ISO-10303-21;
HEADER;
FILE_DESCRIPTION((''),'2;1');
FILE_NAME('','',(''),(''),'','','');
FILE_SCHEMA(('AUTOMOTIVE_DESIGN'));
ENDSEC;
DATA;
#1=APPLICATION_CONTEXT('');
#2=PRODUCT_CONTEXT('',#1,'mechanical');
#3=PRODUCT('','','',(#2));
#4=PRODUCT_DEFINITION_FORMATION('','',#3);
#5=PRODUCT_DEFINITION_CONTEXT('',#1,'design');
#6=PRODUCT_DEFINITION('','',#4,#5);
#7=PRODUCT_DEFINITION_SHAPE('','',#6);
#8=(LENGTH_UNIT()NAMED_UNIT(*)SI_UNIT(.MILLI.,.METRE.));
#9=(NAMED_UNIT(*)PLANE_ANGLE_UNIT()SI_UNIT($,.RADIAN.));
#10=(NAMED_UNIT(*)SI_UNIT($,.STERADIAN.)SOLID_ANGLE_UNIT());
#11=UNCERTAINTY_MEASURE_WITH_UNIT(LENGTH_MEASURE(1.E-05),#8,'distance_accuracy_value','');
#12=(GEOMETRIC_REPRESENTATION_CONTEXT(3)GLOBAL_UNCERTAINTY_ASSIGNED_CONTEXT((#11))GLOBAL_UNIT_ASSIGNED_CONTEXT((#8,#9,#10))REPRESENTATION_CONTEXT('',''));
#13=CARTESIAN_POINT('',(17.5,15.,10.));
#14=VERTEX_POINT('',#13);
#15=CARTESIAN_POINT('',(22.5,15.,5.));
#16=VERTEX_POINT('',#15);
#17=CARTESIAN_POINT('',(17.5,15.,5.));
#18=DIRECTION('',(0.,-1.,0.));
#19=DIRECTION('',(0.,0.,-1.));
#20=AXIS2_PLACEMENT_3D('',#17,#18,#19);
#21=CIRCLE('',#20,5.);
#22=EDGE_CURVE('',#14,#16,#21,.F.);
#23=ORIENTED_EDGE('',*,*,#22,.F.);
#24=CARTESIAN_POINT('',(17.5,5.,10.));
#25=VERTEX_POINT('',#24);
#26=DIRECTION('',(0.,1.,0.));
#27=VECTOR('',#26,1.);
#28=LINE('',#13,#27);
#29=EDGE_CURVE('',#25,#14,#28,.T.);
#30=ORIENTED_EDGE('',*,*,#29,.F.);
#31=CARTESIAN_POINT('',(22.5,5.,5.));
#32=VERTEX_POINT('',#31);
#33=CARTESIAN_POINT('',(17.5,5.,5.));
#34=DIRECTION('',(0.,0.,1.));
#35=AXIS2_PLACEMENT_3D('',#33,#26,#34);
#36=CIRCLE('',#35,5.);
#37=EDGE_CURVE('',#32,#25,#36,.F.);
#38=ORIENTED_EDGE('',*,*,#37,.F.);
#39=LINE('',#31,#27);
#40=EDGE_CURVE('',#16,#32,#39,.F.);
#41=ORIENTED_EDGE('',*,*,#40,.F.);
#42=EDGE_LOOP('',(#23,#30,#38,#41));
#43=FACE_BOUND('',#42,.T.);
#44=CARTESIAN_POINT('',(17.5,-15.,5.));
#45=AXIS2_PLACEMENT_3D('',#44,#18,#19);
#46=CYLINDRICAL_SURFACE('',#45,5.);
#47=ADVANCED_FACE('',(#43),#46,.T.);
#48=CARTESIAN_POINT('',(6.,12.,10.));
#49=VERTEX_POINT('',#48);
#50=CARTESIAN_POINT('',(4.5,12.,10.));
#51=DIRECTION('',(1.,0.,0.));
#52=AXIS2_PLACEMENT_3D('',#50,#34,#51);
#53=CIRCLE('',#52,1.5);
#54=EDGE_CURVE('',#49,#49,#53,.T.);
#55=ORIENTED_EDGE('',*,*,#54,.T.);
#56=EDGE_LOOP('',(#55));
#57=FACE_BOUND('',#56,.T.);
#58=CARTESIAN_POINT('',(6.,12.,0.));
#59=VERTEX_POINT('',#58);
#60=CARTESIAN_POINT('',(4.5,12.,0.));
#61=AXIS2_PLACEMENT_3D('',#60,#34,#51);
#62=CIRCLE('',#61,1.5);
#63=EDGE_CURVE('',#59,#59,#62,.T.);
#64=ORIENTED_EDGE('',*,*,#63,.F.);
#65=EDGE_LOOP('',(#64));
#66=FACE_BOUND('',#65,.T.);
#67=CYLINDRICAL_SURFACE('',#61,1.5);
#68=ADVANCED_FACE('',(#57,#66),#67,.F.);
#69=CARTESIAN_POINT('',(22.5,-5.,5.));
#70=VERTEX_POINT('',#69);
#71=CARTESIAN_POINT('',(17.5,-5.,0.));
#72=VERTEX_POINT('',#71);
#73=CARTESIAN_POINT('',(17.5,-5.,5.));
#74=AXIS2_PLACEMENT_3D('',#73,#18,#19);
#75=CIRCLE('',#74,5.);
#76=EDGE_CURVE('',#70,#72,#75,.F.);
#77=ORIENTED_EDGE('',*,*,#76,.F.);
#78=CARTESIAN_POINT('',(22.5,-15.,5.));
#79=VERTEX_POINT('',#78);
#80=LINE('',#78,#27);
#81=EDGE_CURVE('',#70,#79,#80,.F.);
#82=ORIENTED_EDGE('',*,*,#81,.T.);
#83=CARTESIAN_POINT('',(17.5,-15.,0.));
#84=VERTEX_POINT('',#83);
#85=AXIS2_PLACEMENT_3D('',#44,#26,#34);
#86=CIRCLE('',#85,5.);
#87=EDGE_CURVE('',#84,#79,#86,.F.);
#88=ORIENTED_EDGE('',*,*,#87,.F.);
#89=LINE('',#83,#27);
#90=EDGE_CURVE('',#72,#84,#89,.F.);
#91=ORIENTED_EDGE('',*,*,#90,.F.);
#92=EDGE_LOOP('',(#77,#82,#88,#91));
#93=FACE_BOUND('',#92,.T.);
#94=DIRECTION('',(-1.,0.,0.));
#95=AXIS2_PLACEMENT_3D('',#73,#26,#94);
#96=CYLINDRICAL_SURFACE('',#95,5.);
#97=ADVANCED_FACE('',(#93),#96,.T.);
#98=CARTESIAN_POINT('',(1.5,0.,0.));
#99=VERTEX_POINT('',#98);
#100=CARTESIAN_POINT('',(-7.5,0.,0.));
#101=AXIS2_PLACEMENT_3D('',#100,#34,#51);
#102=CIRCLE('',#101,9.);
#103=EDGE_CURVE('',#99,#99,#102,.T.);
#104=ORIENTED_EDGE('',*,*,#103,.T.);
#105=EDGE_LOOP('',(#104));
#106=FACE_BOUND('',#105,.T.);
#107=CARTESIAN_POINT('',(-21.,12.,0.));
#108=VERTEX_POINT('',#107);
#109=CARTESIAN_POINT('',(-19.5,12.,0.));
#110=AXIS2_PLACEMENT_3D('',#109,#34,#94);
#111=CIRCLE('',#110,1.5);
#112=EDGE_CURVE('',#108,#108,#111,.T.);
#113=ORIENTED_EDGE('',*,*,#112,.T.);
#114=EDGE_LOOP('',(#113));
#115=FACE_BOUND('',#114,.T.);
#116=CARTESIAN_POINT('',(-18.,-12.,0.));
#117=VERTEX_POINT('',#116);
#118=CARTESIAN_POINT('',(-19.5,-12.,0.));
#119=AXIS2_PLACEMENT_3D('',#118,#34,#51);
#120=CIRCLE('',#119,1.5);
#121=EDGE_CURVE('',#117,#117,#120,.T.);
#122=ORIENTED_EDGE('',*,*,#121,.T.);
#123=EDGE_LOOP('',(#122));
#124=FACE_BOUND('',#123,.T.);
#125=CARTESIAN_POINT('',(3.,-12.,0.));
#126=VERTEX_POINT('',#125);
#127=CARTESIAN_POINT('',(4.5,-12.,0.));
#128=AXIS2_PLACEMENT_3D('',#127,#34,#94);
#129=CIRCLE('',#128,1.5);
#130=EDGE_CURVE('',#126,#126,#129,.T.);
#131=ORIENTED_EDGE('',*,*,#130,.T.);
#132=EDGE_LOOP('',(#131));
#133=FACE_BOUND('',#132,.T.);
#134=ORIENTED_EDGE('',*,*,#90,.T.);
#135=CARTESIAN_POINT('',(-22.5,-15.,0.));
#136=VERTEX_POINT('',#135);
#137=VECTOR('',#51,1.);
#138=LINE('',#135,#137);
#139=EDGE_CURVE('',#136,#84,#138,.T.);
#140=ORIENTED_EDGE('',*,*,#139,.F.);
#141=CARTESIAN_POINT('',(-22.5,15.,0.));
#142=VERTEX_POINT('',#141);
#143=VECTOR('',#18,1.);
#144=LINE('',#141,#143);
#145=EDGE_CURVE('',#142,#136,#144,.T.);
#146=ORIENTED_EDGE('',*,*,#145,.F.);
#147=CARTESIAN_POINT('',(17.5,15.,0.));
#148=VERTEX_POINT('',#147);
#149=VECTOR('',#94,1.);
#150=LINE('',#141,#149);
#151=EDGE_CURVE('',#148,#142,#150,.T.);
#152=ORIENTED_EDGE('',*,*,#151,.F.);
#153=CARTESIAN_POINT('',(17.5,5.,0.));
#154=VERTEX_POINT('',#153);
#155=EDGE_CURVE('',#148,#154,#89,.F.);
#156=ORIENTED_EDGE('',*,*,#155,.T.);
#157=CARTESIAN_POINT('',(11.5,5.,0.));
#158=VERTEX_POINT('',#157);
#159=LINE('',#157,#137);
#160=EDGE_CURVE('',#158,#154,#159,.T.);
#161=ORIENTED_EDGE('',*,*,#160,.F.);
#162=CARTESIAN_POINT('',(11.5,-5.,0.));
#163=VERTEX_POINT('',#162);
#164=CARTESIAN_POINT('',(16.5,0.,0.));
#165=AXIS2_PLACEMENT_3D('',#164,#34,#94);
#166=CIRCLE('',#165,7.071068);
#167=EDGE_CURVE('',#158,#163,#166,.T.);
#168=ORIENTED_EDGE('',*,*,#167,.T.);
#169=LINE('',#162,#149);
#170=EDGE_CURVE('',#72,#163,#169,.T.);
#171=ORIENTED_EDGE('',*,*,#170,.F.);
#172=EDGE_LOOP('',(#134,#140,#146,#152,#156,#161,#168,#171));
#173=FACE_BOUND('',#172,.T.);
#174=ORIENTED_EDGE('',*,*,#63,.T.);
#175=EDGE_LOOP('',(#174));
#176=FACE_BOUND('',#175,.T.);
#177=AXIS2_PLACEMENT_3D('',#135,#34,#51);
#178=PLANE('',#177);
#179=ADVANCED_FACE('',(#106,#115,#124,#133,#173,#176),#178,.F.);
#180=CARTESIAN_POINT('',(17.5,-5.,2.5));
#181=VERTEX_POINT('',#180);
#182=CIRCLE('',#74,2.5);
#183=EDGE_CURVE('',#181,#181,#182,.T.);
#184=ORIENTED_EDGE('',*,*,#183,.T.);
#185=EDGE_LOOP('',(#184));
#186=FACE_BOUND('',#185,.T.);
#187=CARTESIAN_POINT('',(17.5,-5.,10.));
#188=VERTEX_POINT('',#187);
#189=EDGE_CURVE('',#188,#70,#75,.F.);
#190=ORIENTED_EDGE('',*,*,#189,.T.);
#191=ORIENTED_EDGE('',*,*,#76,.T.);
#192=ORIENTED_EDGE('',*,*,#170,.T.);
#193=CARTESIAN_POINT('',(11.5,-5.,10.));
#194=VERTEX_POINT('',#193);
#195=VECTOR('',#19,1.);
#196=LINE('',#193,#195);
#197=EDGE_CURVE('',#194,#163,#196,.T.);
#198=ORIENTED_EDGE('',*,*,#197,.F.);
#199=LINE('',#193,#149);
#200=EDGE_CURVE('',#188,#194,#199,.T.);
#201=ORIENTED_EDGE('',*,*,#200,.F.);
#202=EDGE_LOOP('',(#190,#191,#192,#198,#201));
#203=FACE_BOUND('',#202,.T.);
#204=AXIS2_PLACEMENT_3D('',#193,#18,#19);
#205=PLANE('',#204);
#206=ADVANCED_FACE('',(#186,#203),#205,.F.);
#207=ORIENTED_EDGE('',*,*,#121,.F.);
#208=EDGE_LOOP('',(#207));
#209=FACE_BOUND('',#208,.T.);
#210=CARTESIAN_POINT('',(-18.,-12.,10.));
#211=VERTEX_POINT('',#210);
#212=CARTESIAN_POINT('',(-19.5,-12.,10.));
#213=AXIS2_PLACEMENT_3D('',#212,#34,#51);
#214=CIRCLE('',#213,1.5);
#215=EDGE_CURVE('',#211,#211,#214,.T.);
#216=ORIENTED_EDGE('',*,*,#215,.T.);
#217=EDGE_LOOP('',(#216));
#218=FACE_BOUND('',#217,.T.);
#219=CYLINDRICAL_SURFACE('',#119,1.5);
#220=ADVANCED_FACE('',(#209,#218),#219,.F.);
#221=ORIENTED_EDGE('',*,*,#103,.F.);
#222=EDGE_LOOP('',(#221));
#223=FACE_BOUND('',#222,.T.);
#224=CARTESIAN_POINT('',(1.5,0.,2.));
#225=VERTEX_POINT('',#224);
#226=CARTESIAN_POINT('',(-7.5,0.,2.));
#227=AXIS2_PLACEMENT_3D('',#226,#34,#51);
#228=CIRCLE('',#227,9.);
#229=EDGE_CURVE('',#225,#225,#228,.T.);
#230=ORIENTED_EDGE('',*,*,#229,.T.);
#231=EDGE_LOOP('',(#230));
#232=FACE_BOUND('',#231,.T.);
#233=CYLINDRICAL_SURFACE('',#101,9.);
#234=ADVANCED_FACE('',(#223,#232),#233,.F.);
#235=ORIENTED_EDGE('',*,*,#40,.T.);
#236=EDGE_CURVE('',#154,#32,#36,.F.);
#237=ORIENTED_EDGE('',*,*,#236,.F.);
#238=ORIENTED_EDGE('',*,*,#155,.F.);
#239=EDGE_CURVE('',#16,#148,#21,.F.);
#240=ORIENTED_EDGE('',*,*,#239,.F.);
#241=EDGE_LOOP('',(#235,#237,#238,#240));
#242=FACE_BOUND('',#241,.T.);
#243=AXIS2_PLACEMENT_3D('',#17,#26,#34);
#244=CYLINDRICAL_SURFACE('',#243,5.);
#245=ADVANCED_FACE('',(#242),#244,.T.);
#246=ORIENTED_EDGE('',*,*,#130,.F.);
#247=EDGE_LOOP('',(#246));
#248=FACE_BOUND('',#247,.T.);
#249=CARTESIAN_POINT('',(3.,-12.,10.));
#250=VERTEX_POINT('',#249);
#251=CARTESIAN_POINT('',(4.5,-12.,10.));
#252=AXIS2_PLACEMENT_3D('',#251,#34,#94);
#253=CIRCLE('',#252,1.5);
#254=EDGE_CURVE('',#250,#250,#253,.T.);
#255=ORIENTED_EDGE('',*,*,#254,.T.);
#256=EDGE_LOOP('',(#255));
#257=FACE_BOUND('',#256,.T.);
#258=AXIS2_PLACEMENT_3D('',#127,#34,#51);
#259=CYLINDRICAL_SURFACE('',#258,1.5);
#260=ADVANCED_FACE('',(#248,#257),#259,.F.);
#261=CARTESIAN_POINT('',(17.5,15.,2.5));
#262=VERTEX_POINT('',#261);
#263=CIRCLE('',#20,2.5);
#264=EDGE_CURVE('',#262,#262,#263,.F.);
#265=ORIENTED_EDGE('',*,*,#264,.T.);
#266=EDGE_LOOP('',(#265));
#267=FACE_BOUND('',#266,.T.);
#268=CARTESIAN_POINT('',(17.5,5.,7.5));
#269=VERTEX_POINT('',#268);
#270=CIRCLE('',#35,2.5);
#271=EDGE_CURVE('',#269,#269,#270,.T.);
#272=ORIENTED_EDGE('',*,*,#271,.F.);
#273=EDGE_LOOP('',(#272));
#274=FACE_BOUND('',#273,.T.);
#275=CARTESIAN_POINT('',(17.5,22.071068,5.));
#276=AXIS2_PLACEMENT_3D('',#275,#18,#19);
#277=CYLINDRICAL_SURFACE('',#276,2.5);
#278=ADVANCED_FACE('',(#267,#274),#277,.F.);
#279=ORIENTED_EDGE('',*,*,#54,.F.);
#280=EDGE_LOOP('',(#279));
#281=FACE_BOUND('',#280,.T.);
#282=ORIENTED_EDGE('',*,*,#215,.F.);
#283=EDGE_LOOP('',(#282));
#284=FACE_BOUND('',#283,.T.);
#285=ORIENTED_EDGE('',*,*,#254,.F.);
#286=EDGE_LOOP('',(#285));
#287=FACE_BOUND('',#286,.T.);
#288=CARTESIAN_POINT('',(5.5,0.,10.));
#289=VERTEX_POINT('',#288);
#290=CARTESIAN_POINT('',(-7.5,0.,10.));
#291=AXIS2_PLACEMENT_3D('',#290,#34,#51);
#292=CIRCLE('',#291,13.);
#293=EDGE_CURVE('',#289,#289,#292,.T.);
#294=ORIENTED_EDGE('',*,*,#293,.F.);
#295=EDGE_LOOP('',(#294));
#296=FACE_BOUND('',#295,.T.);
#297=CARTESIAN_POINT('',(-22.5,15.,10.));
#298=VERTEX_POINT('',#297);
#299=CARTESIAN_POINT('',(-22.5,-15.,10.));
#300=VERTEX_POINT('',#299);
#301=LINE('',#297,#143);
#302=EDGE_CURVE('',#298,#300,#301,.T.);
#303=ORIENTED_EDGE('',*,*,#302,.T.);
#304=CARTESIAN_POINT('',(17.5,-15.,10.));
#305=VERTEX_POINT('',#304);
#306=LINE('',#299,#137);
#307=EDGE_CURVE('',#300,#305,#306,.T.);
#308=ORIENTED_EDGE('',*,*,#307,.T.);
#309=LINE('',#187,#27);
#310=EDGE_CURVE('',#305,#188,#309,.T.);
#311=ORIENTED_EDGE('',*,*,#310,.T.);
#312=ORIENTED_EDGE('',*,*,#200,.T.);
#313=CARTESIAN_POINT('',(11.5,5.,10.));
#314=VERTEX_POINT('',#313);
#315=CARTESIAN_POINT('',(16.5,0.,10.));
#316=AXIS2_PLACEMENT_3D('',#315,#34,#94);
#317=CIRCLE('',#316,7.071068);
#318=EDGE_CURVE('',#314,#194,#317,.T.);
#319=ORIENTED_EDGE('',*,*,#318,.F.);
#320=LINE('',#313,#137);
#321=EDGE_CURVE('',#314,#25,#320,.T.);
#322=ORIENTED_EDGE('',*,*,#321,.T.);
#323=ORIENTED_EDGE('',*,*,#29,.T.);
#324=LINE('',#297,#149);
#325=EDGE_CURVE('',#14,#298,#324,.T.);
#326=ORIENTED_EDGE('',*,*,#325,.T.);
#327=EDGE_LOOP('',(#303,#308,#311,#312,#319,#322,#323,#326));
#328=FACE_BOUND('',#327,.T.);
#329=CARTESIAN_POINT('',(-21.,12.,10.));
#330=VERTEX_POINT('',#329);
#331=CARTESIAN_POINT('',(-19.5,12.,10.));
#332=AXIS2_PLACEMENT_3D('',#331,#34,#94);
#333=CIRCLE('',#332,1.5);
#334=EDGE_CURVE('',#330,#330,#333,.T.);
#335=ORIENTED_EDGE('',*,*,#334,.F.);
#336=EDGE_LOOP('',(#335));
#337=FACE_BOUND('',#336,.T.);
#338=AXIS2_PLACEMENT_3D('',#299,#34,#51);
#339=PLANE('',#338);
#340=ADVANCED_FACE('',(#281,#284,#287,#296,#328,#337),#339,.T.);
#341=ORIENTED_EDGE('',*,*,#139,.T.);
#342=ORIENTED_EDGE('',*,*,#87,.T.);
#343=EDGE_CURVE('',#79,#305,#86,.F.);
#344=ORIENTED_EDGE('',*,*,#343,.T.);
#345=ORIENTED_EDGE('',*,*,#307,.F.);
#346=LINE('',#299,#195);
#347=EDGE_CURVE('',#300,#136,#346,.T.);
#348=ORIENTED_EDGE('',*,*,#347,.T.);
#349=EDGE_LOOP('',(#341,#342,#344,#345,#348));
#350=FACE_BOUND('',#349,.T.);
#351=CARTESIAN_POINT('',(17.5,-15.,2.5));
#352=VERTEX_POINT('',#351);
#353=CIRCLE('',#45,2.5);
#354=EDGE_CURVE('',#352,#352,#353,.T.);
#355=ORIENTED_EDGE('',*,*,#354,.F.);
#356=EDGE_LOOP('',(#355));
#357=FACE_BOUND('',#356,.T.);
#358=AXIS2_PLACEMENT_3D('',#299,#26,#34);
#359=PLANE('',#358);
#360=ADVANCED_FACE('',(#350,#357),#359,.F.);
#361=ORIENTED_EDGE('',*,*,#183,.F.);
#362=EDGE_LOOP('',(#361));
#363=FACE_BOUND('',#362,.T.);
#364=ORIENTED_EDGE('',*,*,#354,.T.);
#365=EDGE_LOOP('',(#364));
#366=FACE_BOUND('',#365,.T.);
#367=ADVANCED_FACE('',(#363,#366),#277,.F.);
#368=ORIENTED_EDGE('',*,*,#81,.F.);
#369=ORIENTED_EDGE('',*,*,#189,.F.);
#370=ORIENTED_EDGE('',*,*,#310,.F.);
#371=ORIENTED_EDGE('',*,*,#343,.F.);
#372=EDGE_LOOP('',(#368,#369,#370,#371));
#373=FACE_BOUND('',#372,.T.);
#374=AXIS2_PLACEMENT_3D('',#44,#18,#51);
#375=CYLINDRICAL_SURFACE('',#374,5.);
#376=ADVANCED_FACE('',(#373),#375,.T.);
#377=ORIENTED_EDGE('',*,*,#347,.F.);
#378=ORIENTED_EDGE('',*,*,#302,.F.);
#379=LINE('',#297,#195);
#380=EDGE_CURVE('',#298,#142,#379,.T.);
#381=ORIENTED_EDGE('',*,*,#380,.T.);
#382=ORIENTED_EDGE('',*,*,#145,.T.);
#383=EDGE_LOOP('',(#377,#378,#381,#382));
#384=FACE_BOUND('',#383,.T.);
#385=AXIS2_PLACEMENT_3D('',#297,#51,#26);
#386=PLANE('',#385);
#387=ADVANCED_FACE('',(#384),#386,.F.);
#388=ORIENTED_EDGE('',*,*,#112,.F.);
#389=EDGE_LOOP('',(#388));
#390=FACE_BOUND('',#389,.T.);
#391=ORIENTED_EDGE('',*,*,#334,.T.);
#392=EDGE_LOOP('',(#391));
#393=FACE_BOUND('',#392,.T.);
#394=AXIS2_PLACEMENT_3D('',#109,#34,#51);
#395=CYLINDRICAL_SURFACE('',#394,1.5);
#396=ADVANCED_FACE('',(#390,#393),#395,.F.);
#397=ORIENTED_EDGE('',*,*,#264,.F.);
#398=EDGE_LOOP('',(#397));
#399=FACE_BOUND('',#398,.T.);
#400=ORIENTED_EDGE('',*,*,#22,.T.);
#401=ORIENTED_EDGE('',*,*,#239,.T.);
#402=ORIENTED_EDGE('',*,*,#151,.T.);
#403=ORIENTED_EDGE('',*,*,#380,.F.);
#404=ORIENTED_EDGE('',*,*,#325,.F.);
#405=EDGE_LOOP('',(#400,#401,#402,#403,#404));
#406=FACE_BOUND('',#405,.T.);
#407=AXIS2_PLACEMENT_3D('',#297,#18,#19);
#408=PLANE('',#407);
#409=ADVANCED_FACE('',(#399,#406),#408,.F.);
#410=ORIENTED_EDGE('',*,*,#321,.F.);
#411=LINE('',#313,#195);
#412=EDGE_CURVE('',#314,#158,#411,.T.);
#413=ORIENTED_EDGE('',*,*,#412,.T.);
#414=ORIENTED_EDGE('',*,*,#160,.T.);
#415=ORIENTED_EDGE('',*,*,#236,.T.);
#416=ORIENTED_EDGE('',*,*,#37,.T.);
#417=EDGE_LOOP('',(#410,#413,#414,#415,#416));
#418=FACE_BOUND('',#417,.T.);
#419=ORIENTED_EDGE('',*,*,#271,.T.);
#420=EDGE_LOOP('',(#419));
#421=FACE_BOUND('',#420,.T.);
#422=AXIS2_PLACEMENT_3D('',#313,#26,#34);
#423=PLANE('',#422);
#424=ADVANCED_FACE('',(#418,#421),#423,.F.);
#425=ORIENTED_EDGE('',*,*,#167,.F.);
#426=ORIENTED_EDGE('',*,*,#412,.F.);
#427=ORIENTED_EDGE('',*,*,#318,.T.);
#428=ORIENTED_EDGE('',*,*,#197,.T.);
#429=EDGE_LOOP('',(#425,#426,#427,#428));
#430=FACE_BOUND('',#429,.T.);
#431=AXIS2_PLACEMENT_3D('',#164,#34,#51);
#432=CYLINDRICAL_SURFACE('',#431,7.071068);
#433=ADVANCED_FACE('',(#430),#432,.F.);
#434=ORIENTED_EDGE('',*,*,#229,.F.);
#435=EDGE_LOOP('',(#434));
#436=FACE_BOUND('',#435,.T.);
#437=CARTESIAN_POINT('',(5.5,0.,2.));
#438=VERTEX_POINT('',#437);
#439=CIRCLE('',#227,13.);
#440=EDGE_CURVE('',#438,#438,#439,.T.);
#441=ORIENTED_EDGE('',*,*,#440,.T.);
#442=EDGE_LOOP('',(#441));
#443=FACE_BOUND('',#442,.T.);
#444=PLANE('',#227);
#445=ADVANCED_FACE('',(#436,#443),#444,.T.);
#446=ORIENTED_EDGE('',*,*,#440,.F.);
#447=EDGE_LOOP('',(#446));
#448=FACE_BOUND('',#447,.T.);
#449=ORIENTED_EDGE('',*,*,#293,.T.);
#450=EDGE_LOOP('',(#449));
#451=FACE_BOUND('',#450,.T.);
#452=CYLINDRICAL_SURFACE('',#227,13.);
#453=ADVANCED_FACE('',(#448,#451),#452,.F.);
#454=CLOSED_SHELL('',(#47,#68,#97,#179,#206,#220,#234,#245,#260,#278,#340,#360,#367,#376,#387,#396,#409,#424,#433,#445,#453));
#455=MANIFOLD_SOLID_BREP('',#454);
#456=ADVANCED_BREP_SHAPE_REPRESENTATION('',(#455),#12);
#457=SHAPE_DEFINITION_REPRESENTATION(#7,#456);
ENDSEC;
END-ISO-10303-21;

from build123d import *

# Parameters (mm, degrees)
RESSALTO_EXTRUS_O1_DEPTH = 10
CORTE_EXTRUS_O1_REACH    = 40.81
ESBO_O2_R                = 2.5
CORTE_EXTRUS_O2_DEPTH    = 10
ESBO_O5_R                = 13
CORTE_EXTRUS_O3_DEPTH    = 8
ESBO_O6_R                = 9
CORTE_EXTRUS_O4_DEPTH    = 29.200177304
FILETE1_R                = 5
ESBO_O7_R                = 1.5
CORTE_EXTRUS_O5_DEPTH    = 10


with BuildPart() as part:
    # Esboço1 → Ressalto-extrusão1 (new body)
    with BuildSketch(Plane.XY):
        Polygon((-22.5, 15), (22.5, 15), (22.5, 5), (11.5, 5), (11.5, -5), (22.5, -5), (22.5, -15), (-22.5, -15), align=None)
    extrude(amount=RESSALTO_EXTRUS_O1_DEPTH)

    # Corte-extrusão1: up to this face of the body (flat: up to its plane)
    corte_extrus_o1_end = Plane(part.part.faces().sort_by_distance((0, 15, 5))[0])
    # Esboço2 → Corte-extrusão1 (cut, up to the picked face)
    with BuildSketch(Plane.XZ.offset(15), mode=Mode.PRIVATE) as corte_extrus_o1_sk1:
        with Locations(Location((17.5, 5, 0), (0, 0, 270))):
            Circle(ESBO_O2_R)
    corte_extrus_o1_tool1 = split(extrude(corte_extrus_o1_sk1.sketch, amount=-CORTE_EXTRUS_O1_REACH, mode=Mode.PRIVATE), bisect_by=corte_extrus_o1_end, keep=Keep.BOTH, mode=Mode.PRIVATE)
    add(corte_extrus_o1_tool1.solids().sort_by(Axis((17.5, -15, 5), (0, 1, 0)))[0], mode=Mode.SUBTRACT)

    # Esboço4 → Corte-extrusão2 (cut)
    with BuildSketch(Plane.XY.offset(10)):
        with BuildLine():
            Line((11.5, 5), (11.5, -5))
            ThreePointArc((11.5, -5), (9.428932188, 0), (11.5, 5))
        make_face()
    extrude(amount=-CORTE_EXTRUS_O2_DEPTH, mode=Mode.SUBTRACT)

    # Esboço5 → Corte-extrusão3 (cut)
    with BuildSketch(Plane.XY.offset(10)):
        with Locations((-7.5, 0)):
            Circle(ESBO_O5_R)
    extrude(amount=-CORTE_EXTRUS_O3_DEPTH, mode=Mode.SUBTRACT)

    # Esboço6 → Corte-extrusão4 (cut, through all)
    with BuildSketch(Plane.XY.offset(2)):
        with Locations((-7.5, 0)):
            Circle(ESBO_O6_R)
    extrude(amount=-CORTE_EXTRUS_O4_DEPTH, mode=Mode.SUBTRACT)

    # Filete1
    filete1_edges = [part.edges().sort_by_distance(p)[0] for p in [
        (22.5, 10, 0),
        (22.5, 10, 10),
        (22.5, -10, 0),
        (22.5, -10, 10),
    ]]
    fillet(filete1_edges, radius=FILETE1_R - 0.0001)  # a hair under: the kernel refuses the full size

    # Esboço7 → Corte-extrusão5 (cut)
    with BuildSketch(Plane.XY.offset(10)):
        with Locations((-19.5, -12)):
            Circle(ESBO_O7_R)
        with Locations(Location((-19.5, 12, 0), (0, 0, 180))):
            Circle(ESBO_O7_R)
        with Locations((4.5, 12)):
            Circle(ESBO_O7_R)
        with Locations(Location((4.5, -12, 0), (0, 0, 180))):
            Circle(ESBO_O7_R)
    extrude(amount=-CORTE_EXTRUS_O5_DEPTH, mode=Mode.SUBTRACT)


solid = part.part
